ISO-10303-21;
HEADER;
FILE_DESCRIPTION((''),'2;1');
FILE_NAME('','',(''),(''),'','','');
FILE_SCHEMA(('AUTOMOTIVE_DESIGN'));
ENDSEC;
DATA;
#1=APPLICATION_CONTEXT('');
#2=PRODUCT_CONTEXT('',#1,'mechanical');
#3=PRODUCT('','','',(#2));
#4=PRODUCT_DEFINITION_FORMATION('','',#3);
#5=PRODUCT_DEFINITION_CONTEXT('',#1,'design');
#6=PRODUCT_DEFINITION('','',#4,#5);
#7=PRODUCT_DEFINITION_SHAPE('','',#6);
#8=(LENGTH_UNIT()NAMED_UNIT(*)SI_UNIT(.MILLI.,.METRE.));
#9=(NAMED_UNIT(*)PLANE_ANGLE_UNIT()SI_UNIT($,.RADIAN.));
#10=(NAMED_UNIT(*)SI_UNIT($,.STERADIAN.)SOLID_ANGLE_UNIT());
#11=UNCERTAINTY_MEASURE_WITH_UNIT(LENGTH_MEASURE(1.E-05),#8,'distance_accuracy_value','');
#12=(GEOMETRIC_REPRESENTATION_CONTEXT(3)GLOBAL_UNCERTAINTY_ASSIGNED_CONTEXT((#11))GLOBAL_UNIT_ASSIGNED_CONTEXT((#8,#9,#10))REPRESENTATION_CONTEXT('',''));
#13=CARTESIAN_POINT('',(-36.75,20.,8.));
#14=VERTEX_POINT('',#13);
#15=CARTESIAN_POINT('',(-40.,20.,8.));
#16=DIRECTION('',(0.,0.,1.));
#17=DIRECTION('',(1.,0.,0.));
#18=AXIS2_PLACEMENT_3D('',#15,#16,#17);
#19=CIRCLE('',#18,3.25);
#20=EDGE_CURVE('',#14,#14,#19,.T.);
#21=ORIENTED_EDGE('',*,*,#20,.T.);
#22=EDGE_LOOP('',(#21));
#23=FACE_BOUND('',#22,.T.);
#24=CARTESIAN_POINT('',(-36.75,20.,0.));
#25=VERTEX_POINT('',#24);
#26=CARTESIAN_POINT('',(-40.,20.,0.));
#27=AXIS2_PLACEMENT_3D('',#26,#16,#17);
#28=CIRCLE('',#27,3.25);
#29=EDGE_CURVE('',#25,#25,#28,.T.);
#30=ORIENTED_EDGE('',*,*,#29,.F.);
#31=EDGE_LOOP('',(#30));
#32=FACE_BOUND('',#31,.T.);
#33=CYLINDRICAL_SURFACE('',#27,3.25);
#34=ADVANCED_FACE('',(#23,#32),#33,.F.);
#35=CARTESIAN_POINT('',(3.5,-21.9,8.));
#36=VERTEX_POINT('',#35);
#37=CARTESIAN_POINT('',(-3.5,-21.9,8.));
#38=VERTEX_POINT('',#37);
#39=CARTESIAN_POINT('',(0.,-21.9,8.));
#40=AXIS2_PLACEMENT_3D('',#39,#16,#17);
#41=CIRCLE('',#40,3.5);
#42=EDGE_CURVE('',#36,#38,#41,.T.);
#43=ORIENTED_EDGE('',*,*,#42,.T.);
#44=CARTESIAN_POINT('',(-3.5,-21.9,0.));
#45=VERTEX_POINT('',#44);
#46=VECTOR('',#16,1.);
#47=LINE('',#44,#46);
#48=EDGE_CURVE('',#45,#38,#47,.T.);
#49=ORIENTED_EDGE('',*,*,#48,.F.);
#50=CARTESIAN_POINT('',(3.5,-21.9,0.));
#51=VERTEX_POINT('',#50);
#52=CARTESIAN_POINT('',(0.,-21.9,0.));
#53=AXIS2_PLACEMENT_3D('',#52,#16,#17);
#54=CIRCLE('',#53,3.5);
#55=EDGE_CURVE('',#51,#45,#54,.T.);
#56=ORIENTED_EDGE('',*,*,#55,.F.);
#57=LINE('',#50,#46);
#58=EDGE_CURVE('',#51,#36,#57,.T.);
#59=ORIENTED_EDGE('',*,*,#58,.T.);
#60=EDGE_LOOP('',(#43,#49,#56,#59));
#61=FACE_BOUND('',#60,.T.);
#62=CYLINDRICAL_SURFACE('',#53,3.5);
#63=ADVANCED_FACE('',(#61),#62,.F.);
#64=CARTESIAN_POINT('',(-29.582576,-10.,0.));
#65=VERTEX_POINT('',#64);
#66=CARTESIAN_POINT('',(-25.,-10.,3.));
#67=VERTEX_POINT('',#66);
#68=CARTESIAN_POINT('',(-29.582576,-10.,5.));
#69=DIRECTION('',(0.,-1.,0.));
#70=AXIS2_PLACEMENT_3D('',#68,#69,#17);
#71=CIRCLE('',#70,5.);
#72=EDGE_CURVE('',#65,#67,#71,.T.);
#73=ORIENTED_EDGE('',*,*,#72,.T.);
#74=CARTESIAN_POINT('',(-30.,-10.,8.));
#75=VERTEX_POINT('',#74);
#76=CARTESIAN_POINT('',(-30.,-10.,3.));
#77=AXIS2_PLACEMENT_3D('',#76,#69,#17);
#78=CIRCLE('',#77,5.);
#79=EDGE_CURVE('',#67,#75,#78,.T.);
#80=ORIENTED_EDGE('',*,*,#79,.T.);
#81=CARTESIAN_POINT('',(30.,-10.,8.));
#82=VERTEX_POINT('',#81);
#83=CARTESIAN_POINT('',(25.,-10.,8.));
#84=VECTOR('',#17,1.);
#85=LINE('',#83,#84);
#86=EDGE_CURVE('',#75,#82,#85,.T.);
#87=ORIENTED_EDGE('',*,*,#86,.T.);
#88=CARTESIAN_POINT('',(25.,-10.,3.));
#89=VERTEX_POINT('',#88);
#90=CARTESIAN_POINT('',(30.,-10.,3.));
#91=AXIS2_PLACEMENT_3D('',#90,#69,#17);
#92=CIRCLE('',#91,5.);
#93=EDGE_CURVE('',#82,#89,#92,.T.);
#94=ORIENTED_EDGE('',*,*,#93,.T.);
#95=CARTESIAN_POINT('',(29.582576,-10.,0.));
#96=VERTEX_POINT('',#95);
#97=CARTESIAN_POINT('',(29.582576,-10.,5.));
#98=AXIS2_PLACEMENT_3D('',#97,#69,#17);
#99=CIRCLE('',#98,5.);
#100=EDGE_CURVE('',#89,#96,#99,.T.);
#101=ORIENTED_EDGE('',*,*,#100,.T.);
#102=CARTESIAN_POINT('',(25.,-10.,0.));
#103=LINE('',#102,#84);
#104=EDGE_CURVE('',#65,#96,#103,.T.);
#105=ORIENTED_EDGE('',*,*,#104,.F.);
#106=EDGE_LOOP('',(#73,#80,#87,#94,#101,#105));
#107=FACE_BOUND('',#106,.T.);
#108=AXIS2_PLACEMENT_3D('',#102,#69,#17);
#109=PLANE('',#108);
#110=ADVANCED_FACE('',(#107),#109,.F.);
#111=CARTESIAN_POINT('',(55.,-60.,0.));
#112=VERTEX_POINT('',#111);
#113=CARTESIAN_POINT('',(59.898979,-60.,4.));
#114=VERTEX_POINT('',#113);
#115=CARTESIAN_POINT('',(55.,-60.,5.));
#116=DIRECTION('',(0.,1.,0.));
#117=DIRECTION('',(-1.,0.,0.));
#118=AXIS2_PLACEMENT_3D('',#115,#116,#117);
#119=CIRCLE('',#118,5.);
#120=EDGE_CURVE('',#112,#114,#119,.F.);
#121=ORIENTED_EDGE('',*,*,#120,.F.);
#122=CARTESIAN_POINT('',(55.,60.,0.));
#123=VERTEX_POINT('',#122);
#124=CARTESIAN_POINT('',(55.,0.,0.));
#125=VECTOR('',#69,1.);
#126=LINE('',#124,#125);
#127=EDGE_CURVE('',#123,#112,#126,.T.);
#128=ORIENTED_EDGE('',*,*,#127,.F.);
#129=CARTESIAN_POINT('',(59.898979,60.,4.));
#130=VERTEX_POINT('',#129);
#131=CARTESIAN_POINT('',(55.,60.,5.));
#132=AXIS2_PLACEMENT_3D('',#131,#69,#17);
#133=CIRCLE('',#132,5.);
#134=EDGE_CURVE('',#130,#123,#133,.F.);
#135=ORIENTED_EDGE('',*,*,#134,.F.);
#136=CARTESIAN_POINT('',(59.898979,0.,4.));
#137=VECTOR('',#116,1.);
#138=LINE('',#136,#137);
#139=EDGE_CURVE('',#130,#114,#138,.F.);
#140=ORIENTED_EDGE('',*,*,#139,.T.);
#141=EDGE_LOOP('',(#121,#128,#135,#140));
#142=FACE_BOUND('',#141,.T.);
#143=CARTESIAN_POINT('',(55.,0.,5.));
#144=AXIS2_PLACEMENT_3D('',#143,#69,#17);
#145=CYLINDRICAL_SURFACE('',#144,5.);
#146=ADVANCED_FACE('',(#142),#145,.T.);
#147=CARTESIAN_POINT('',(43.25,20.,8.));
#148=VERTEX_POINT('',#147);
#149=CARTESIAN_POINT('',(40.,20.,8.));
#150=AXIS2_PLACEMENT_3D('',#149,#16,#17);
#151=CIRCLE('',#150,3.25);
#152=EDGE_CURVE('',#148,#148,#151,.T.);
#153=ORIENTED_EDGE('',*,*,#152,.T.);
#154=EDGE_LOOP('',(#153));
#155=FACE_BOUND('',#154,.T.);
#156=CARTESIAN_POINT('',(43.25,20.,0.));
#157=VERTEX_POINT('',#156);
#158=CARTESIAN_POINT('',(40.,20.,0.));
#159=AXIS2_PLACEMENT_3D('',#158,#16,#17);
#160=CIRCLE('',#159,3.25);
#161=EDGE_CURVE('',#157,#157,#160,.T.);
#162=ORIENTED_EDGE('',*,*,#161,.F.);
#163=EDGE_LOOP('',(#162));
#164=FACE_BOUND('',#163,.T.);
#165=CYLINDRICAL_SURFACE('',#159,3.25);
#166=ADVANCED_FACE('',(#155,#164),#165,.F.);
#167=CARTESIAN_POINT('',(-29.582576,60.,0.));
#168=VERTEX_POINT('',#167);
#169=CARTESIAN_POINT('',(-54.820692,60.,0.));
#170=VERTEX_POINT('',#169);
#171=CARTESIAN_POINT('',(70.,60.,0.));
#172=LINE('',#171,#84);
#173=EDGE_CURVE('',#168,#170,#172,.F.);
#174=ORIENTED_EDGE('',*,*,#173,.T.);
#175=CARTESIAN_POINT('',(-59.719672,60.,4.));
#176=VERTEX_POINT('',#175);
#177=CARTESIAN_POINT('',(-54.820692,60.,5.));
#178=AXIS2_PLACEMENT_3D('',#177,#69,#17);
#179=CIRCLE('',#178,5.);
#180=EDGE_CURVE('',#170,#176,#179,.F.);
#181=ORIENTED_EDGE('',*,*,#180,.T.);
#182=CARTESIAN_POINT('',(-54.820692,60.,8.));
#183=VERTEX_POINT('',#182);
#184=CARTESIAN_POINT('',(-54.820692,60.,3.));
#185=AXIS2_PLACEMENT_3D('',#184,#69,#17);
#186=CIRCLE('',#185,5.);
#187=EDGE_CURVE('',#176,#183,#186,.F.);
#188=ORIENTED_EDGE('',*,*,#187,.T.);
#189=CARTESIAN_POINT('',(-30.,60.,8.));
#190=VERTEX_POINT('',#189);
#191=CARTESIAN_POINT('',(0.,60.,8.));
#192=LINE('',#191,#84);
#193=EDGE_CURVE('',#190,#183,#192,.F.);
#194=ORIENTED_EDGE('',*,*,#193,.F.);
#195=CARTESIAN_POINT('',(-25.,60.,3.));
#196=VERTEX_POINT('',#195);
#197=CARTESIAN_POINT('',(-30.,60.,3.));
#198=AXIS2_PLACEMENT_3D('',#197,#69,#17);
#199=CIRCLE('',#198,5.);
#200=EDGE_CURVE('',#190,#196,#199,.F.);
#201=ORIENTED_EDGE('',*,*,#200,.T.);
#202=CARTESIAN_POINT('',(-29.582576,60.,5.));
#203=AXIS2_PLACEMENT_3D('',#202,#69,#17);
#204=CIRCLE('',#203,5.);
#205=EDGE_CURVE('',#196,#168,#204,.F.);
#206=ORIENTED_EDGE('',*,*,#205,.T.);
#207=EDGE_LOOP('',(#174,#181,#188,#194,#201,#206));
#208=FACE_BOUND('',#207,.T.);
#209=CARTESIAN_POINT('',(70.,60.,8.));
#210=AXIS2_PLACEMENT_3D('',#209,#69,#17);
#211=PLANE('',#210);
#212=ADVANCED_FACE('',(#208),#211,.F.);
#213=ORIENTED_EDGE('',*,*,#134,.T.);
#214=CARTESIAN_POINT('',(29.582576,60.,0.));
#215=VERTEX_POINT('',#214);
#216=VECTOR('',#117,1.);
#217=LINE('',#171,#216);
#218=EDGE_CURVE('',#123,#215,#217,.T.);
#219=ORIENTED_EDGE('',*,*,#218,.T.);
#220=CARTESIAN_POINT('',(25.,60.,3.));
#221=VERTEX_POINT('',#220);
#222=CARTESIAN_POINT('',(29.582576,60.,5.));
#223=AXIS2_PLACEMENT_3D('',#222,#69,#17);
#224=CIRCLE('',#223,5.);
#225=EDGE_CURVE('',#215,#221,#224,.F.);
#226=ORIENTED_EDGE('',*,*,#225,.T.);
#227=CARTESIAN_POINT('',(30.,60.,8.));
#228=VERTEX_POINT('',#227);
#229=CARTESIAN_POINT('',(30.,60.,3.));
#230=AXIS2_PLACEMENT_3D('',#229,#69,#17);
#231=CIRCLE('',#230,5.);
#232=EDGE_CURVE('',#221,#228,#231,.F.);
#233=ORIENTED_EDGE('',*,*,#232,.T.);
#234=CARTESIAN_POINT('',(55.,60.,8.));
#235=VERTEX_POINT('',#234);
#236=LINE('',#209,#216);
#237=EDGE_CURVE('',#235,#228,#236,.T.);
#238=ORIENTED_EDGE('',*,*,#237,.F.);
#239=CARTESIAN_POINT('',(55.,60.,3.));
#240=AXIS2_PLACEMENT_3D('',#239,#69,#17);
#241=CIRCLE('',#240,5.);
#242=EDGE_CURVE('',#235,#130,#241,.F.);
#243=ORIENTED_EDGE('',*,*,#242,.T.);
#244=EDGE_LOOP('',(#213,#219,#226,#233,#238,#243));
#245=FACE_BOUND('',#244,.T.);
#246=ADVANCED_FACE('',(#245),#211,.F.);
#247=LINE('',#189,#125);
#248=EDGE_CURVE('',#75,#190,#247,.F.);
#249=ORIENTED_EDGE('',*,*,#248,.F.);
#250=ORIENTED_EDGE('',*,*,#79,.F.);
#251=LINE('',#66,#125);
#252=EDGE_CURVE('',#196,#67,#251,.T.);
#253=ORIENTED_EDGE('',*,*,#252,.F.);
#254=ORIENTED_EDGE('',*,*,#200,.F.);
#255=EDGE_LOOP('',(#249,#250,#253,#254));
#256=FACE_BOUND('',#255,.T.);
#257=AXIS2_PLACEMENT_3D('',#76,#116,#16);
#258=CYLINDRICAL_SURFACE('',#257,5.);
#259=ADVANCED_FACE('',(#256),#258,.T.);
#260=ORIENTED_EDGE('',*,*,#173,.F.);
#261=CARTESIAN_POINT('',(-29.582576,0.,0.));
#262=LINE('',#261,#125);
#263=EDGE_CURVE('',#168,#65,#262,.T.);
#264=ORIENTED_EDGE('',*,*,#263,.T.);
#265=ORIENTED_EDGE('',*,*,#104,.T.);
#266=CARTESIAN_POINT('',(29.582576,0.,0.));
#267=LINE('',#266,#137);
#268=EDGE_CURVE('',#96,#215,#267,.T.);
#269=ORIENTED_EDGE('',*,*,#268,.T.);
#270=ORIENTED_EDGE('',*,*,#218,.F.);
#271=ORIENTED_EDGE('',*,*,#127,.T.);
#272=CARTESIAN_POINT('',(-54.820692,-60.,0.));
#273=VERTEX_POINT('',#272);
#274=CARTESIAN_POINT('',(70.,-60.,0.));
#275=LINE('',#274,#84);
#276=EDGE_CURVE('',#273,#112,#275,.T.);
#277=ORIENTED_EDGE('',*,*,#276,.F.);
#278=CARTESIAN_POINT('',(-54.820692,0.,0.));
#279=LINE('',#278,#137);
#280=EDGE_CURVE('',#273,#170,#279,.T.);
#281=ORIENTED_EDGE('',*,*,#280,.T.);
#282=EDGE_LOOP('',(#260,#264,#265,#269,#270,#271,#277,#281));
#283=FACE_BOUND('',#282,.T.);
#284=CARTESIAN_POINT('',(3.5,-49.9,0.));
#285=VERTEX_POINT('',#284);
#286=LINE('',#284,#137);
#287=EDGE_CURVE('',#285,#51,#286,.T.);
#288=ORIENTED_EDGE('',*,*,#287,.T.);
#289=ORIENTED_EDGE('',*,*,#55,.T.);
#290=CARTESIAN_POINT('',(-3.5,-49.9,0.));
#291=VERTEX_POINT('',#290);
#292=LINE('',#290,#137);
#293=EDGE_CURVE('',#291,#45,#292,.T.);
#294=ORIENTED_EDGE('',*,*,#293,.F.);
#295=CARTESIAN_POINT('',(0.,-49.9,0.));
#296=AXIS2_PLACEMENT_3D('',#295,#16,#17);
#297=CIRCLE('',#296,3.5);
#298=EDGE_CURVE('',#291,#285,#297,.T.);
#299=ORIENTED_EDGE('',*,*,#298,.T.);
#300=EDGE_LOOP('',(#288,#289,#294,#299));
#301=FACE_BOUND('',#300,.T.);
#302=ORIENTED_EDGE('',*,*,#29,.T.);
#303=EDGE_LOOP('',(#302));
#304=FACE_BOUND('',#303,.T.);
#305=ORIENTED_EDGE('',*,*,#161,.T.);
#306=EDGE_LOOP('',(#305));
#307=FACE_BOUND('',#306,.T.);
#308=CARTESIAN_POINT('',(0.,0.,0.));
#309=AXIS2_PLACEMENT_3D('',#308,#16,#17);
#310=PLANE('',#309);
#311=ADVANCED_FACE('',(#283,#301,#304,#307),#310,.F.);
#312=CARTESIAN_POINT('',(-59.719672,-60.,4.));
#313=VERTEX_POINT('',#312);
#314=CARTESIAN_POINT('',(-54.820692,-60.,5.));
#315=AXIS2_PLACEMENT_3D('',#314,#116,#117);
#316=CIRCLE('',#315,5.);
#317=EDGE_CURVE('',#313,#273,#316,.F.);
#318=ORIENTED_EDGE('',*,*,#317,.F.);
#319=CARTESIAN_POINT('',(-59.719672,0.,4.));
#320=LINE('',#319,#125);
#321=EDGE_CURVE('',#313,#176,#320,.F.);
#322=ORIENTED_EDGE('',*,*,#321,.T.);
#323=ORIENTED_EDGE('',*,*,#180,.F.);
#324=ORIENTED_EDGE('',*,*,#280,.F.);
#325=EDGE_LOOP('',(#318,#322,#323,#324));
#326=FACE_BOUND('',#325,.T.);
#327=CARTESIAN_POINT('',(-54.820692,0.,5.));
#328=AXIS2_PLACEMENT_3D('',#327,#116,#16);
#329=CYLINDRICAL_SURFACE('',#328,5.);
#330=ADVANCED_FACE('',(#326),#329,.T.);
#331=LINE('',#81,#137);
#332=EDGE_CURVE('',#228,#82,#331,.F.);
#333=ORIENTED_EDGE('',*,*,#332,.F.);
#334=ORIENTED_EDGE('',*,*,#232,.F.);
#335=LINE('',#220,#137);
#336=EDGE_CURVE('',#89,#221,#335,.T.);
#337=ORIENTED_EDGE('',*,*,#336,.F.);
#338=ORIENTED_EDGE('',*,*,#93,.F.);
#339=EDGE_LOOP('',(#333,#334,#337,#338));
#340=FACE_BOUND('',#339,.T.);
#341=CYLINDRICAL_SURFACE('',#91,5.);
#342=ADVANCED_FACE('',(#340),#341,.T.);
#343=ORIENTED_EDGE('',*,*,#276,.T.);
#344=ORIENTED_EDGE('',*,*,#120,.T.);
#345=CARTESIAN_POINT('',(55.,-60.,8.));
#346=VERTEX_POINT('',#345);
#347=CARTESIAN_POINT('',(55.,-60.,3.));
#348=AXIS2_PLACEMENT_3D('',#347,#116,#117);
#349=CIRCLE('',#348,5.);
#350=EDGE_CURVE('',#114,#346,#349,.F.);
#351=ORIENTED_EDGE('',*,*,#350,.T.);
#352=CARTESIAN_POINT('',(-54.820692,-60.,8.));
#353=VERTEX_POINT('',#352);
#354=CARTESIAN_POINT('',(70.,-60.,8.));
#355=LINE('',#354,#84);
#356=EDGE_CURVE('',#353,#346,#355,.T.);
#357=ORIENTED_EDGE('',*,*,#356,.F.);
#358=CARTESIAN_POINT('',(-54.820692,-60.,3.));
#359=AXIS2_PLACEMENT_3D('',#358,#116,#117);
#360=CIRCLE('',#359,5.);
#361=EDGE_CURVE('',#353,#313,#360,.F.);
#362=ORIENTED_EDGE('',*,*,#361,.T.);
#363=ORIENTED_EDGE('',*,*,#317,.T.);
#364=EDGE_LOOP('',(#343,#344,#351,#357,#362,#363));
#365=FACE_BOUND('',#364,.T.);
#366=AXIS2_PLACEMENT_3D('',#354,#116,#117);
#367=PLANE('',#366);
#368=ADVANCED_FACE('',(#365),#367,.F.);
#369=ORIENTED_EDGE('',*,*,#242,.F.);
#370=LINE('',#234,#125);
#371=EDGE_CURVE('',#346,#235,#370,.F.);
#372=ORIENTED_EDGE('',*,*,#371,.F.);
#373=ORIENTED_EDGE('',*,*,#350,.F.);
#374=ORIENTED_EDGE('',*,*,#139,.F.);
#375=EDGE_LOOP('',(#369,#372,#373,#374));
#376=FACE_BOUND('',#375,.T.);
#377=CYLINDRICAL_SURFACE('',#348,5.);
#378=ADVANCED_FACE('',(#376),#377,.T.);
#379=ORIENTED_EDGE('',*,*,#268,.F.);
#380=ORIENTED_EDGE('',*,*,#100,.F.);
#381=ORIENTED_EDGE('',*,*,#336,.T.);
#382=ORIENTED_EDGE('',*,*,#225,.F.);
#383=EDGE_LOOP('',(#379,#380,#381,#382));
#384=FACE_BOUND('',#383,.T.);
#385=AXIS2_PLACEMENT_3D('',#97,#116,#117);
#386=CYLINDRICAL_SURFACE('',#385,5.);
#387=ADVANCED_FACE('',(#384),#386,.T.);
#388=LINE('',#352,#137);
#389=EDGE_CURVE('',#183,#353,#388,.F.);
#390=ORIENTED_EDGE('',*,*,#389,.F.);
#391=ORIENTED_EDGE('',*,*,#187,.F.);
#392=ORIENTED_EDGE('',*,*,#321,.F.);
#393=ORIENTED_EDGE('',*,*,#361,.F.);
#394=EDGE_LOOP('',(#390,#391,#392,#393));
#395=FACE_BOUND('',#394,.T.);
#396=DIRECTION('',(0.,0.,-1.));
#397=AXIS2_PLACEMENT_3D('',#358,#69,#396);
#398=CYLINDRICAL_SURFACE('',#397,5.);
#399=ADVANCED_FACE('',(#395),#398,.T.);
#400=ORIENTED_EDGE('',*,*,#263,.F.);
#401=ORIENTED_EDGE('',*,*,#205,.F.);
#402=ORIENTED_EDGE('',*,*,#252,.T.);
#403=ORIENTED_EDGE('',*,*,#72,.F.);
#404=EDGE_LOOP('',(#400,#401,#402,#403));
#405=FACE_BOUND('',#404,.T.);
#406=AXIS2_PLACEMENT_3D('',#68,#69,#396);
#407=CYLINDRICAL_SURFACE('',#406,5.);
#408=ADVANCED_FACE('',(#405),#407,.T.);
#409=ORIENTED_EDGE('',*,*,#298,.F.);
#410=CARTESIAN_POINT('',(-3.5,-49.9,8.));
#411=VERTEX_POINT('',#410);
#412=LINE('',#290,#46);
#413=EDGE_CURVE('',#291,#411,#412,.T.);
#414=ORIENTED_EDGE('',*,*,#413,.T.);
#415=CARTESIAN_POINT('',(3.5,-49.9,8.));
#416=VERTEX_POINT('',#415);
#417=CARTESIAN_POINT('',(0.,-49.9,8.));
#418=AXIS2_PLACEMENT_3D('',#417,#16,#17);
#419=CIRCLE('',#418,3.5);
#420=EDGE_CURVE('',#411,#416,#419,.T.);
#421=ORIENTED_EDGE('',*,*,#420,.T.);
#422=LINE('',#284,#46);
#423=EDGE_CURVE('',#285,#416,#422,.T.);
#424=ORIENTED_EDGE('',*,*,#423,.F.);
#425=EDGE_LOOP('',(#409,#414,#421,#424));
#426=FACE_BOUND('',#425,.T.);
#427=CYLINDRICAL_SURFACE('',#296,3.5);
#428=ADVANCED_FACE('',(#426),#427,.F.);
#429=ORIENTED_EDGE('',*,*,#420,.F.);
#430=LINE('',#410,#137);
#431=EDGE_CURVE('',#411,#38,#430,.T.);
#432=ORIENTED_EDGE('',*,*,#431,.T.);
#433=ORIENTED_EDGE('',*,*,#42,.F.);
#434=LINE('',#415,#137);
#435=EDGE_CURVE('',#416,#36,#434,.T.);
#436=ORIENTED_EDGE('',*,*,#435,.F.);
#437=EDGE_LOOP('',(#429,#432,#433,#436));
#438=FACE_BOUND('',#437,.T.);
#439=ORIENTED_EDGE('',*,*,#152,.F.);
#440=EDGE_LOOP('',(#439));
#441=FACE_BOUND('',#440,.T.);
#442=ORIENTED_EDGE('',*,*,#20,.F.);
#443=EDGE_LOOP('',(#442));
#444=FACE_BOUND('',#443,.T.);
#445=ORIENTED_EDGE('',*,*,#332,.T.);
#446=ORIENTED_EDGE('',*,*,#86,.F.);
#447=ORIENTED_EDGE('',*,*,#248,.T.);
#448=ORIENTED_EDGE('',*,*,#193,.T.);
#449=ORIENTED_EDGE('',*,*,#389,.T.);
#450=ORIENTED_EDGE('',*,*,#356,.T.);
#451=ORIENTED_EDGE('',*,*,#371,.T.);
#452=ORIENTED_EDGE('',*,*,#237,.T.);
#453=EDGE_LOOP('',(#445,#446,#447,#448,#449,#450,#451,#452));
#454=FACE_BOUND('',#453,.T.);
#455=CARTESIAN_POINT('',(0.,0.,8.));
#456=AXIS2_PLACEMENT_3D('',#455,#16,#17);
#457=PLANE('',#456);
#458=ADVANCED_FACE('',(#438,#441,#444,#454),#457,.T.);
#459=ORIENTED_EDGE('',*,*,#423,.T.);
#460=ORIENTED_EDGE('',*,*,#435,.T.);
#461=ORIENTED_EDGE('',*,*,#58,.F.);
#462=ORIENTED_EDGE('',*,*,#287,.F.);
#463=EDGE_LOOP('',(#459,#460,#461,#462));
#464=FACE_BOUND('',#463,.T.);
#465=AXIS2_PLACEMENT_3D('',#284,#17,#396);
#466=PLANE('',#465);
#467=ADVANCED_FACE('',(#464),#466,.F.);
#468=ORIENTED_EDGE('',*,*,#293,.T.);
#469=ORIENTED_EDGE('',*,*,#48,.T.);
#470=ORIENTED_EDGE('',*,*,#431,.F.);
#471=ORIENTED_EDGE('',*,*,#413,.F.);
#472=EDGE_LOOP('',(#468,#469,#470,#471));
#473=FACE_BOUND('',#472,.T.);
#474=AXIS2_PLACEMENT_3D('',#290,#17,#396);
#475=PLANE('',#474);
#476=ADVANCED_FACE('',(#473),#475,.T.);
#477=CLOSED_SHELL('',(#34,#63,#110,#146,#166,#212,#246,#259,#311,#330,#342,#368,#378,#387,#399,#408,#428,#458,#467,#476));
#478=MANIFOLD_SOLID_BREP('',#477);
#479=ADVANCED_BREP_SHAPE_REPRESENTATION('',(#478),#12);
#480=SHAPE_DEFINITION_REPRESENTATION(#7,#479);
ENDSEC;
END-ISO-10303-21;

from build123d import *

# Parameters (mm, degrees)
SKETCH1_W           = 140
SKETCH1_H           = 120
BOSS_EXTRUDE1_DEPTH = 8
SKETCH2_R           = 3.25
CUT_EXTRUDE1_DEPTH  = 93.54188241
CUT_EXTRUDE2_DEPTH  = 93.54188241
SKETCH5_W           = 50
SKETCH5_H           = 70
CUT_EXTRUDE3_DEPTH  = 93.54188241
FILLET2_R           = 5
FILLET3_R           = 5
SKETCH6_W           = 10.179307593
SKETCH6_H           = 120.009276429
SKETCH6_W_2         = 10
SKETCH6_H_2         = 120
CUT_EXTRUDE4_DEPTH  = 93.54188241
FILLET4_R           = 5


with BuildPart() as part:
    # Sketch1 → Boss-Extrude1 (new body)
    with BuildSketch(Plane.XY):
        Rectangle(SKETCH1_W, SKETCH1_H)
    extrude(amount=BOSS_EXTRUDE1_DEPTH)

    # Sketch2 → Cut-Extrude1 (cut, through all)
    with BuildSketch(Plane.XY.offset(8)):
        with Locations((-40, 20)):
            Circle(SKETCH2_R)
        with Locations((40, 20)):
            Circle(SKETCH2_R)
    extrude(amount=-CUT_EXTRUDE1_DEPTH, mode=Mode.SUBTRACT)

    # Sketch3 → Cut-Extrude2 (cut, through all)
    with BuildSketch(Plane.XY.offset(8)):
        with BuildLine():
            Line((-3.5, -49.9), (-3.5, -21.9))
            ThreePointArc((-3.5, -21.9), (0, -18.4), (3.5, -21.9))
            Line((3.5, -21.9), (3.5, -49.9))
            ThreePointArc((3.5, -49.9), (0, -53.4), (-3.5, -49.9))
        make_face()
    extrude(amount=-CUT_EXTRUDE2_DEPTH, mode=Mode.SUBTRACT)

    # Sketch5 → Cut-Extrude3 (cut, through all)
    with BuildSketch(Plane.XY.offset(8)):
        with Locations((0, 25)):
            Rectangle(SKETCH5_W, SKETCH5_H)
    extrude(amount=-CUT_EXTRUDE3_DEPTH, mode=Mode.SUBTRACT)

    # Fillet2
    fillet2_edges = [part.edges().sort_by_distance(p)[0] for p in [
        (-25, 25, 8),
        (25, 25, 8),
    ]]
    fillet(fillet2_edges, radius=FILLET2_R)

    # Fillet3
    # the kernel refuses this fillet: 5 mm, written as the material it takes off along each edge
    with BuildSketch(Plane(origin=(25, -10, 0), x_dir=(1, 0, 0), z_dir=(0, 1, 0)), Plane(origin=(-25, 71.456439237, 0), x_dir=(-1, 0, 0), z_dir=(0, -1, 0))) as fillet3_piece_1:
        with BuildLine():
            CenterArc((4.582575695, -5), FILLET3_R, 90, 66.421821522)
            Line((0, -3), (-0.091651514, -2.96))
            ThreePointArc((-0.091651514, -2.96), (-0.1, -1.5), (-0.1, 0))
            Line((-0.1, 0), (0, 0.1))
            Line((0, 0.1), (4.582575695, 0.1))
            Line((4.582575695, 0.1), (4.582575695, 0))
        make_face()
    extrude(amount=81.456439237, mode=Mode.SUBTRACT)

    # Sketch6 → Cut-Extrude4 (cut, through all)
    with BuildSketch(Plane.XY.offset(8)):
        with Locations((-64.910346203, 0.004638214)):
            Rectangle(SKETCH6_W, SKETCH6_H)
        with Locations((65, 0)):
            Rectangle(SKETCH6_W_2, SKETCH6_H_2)
    extrude(amount=-CUT_EXTRUDE4_DEPTH, mode=Mode.SUBTRACT)

    # Fillet4
    # the kernel refuses this fillet: 5 mm, written as the material it takes off along each edge
    with BuildSketch(Plane(origin=(60, 72.5, 0), x_dir=(0, 0, 1), z_dir=(0, -1, 0)), Plane(origin=(-59.820692407, -72.5, 8), x_dir=(1, 0, 0), z_dir=(0, 1, 0))) as fillet4_piece_1:
        with BuildLine():
            CenterArc((FILLET4_R, FILLET4_R), FILLET4_R, 180, 90)
            Line((0, FILLET4_R), (0, 0))
            Line((0, 0), (FILLET4_R, 0))
        make_face()
    extrude(amount=145, mode=Mode.SUBTRACT)
    with BuildSketch(Plane(origin=(60, -72.5, 8), x_dir=(-1, 0, 0), z_dir=(0, 1, 0)), Plane(origin=(-59.820692407, 72.5, 0), x_dir=(0, 0, 1), z_dir=(0, -1, 0))) as fillet4_piece_2:
        with BuildLine():
            CenterArc((FILLET4_R, -FILLET4_R), FILLET4_R, 90, 90)
            Line((0, -FILLET4_R), (0, 0))
            Line((0, 0), (FILLET4_R, 0))
        make_face()
    extrude(amount=145, mode=Mode.SUBTRACT)


solid = part.part
